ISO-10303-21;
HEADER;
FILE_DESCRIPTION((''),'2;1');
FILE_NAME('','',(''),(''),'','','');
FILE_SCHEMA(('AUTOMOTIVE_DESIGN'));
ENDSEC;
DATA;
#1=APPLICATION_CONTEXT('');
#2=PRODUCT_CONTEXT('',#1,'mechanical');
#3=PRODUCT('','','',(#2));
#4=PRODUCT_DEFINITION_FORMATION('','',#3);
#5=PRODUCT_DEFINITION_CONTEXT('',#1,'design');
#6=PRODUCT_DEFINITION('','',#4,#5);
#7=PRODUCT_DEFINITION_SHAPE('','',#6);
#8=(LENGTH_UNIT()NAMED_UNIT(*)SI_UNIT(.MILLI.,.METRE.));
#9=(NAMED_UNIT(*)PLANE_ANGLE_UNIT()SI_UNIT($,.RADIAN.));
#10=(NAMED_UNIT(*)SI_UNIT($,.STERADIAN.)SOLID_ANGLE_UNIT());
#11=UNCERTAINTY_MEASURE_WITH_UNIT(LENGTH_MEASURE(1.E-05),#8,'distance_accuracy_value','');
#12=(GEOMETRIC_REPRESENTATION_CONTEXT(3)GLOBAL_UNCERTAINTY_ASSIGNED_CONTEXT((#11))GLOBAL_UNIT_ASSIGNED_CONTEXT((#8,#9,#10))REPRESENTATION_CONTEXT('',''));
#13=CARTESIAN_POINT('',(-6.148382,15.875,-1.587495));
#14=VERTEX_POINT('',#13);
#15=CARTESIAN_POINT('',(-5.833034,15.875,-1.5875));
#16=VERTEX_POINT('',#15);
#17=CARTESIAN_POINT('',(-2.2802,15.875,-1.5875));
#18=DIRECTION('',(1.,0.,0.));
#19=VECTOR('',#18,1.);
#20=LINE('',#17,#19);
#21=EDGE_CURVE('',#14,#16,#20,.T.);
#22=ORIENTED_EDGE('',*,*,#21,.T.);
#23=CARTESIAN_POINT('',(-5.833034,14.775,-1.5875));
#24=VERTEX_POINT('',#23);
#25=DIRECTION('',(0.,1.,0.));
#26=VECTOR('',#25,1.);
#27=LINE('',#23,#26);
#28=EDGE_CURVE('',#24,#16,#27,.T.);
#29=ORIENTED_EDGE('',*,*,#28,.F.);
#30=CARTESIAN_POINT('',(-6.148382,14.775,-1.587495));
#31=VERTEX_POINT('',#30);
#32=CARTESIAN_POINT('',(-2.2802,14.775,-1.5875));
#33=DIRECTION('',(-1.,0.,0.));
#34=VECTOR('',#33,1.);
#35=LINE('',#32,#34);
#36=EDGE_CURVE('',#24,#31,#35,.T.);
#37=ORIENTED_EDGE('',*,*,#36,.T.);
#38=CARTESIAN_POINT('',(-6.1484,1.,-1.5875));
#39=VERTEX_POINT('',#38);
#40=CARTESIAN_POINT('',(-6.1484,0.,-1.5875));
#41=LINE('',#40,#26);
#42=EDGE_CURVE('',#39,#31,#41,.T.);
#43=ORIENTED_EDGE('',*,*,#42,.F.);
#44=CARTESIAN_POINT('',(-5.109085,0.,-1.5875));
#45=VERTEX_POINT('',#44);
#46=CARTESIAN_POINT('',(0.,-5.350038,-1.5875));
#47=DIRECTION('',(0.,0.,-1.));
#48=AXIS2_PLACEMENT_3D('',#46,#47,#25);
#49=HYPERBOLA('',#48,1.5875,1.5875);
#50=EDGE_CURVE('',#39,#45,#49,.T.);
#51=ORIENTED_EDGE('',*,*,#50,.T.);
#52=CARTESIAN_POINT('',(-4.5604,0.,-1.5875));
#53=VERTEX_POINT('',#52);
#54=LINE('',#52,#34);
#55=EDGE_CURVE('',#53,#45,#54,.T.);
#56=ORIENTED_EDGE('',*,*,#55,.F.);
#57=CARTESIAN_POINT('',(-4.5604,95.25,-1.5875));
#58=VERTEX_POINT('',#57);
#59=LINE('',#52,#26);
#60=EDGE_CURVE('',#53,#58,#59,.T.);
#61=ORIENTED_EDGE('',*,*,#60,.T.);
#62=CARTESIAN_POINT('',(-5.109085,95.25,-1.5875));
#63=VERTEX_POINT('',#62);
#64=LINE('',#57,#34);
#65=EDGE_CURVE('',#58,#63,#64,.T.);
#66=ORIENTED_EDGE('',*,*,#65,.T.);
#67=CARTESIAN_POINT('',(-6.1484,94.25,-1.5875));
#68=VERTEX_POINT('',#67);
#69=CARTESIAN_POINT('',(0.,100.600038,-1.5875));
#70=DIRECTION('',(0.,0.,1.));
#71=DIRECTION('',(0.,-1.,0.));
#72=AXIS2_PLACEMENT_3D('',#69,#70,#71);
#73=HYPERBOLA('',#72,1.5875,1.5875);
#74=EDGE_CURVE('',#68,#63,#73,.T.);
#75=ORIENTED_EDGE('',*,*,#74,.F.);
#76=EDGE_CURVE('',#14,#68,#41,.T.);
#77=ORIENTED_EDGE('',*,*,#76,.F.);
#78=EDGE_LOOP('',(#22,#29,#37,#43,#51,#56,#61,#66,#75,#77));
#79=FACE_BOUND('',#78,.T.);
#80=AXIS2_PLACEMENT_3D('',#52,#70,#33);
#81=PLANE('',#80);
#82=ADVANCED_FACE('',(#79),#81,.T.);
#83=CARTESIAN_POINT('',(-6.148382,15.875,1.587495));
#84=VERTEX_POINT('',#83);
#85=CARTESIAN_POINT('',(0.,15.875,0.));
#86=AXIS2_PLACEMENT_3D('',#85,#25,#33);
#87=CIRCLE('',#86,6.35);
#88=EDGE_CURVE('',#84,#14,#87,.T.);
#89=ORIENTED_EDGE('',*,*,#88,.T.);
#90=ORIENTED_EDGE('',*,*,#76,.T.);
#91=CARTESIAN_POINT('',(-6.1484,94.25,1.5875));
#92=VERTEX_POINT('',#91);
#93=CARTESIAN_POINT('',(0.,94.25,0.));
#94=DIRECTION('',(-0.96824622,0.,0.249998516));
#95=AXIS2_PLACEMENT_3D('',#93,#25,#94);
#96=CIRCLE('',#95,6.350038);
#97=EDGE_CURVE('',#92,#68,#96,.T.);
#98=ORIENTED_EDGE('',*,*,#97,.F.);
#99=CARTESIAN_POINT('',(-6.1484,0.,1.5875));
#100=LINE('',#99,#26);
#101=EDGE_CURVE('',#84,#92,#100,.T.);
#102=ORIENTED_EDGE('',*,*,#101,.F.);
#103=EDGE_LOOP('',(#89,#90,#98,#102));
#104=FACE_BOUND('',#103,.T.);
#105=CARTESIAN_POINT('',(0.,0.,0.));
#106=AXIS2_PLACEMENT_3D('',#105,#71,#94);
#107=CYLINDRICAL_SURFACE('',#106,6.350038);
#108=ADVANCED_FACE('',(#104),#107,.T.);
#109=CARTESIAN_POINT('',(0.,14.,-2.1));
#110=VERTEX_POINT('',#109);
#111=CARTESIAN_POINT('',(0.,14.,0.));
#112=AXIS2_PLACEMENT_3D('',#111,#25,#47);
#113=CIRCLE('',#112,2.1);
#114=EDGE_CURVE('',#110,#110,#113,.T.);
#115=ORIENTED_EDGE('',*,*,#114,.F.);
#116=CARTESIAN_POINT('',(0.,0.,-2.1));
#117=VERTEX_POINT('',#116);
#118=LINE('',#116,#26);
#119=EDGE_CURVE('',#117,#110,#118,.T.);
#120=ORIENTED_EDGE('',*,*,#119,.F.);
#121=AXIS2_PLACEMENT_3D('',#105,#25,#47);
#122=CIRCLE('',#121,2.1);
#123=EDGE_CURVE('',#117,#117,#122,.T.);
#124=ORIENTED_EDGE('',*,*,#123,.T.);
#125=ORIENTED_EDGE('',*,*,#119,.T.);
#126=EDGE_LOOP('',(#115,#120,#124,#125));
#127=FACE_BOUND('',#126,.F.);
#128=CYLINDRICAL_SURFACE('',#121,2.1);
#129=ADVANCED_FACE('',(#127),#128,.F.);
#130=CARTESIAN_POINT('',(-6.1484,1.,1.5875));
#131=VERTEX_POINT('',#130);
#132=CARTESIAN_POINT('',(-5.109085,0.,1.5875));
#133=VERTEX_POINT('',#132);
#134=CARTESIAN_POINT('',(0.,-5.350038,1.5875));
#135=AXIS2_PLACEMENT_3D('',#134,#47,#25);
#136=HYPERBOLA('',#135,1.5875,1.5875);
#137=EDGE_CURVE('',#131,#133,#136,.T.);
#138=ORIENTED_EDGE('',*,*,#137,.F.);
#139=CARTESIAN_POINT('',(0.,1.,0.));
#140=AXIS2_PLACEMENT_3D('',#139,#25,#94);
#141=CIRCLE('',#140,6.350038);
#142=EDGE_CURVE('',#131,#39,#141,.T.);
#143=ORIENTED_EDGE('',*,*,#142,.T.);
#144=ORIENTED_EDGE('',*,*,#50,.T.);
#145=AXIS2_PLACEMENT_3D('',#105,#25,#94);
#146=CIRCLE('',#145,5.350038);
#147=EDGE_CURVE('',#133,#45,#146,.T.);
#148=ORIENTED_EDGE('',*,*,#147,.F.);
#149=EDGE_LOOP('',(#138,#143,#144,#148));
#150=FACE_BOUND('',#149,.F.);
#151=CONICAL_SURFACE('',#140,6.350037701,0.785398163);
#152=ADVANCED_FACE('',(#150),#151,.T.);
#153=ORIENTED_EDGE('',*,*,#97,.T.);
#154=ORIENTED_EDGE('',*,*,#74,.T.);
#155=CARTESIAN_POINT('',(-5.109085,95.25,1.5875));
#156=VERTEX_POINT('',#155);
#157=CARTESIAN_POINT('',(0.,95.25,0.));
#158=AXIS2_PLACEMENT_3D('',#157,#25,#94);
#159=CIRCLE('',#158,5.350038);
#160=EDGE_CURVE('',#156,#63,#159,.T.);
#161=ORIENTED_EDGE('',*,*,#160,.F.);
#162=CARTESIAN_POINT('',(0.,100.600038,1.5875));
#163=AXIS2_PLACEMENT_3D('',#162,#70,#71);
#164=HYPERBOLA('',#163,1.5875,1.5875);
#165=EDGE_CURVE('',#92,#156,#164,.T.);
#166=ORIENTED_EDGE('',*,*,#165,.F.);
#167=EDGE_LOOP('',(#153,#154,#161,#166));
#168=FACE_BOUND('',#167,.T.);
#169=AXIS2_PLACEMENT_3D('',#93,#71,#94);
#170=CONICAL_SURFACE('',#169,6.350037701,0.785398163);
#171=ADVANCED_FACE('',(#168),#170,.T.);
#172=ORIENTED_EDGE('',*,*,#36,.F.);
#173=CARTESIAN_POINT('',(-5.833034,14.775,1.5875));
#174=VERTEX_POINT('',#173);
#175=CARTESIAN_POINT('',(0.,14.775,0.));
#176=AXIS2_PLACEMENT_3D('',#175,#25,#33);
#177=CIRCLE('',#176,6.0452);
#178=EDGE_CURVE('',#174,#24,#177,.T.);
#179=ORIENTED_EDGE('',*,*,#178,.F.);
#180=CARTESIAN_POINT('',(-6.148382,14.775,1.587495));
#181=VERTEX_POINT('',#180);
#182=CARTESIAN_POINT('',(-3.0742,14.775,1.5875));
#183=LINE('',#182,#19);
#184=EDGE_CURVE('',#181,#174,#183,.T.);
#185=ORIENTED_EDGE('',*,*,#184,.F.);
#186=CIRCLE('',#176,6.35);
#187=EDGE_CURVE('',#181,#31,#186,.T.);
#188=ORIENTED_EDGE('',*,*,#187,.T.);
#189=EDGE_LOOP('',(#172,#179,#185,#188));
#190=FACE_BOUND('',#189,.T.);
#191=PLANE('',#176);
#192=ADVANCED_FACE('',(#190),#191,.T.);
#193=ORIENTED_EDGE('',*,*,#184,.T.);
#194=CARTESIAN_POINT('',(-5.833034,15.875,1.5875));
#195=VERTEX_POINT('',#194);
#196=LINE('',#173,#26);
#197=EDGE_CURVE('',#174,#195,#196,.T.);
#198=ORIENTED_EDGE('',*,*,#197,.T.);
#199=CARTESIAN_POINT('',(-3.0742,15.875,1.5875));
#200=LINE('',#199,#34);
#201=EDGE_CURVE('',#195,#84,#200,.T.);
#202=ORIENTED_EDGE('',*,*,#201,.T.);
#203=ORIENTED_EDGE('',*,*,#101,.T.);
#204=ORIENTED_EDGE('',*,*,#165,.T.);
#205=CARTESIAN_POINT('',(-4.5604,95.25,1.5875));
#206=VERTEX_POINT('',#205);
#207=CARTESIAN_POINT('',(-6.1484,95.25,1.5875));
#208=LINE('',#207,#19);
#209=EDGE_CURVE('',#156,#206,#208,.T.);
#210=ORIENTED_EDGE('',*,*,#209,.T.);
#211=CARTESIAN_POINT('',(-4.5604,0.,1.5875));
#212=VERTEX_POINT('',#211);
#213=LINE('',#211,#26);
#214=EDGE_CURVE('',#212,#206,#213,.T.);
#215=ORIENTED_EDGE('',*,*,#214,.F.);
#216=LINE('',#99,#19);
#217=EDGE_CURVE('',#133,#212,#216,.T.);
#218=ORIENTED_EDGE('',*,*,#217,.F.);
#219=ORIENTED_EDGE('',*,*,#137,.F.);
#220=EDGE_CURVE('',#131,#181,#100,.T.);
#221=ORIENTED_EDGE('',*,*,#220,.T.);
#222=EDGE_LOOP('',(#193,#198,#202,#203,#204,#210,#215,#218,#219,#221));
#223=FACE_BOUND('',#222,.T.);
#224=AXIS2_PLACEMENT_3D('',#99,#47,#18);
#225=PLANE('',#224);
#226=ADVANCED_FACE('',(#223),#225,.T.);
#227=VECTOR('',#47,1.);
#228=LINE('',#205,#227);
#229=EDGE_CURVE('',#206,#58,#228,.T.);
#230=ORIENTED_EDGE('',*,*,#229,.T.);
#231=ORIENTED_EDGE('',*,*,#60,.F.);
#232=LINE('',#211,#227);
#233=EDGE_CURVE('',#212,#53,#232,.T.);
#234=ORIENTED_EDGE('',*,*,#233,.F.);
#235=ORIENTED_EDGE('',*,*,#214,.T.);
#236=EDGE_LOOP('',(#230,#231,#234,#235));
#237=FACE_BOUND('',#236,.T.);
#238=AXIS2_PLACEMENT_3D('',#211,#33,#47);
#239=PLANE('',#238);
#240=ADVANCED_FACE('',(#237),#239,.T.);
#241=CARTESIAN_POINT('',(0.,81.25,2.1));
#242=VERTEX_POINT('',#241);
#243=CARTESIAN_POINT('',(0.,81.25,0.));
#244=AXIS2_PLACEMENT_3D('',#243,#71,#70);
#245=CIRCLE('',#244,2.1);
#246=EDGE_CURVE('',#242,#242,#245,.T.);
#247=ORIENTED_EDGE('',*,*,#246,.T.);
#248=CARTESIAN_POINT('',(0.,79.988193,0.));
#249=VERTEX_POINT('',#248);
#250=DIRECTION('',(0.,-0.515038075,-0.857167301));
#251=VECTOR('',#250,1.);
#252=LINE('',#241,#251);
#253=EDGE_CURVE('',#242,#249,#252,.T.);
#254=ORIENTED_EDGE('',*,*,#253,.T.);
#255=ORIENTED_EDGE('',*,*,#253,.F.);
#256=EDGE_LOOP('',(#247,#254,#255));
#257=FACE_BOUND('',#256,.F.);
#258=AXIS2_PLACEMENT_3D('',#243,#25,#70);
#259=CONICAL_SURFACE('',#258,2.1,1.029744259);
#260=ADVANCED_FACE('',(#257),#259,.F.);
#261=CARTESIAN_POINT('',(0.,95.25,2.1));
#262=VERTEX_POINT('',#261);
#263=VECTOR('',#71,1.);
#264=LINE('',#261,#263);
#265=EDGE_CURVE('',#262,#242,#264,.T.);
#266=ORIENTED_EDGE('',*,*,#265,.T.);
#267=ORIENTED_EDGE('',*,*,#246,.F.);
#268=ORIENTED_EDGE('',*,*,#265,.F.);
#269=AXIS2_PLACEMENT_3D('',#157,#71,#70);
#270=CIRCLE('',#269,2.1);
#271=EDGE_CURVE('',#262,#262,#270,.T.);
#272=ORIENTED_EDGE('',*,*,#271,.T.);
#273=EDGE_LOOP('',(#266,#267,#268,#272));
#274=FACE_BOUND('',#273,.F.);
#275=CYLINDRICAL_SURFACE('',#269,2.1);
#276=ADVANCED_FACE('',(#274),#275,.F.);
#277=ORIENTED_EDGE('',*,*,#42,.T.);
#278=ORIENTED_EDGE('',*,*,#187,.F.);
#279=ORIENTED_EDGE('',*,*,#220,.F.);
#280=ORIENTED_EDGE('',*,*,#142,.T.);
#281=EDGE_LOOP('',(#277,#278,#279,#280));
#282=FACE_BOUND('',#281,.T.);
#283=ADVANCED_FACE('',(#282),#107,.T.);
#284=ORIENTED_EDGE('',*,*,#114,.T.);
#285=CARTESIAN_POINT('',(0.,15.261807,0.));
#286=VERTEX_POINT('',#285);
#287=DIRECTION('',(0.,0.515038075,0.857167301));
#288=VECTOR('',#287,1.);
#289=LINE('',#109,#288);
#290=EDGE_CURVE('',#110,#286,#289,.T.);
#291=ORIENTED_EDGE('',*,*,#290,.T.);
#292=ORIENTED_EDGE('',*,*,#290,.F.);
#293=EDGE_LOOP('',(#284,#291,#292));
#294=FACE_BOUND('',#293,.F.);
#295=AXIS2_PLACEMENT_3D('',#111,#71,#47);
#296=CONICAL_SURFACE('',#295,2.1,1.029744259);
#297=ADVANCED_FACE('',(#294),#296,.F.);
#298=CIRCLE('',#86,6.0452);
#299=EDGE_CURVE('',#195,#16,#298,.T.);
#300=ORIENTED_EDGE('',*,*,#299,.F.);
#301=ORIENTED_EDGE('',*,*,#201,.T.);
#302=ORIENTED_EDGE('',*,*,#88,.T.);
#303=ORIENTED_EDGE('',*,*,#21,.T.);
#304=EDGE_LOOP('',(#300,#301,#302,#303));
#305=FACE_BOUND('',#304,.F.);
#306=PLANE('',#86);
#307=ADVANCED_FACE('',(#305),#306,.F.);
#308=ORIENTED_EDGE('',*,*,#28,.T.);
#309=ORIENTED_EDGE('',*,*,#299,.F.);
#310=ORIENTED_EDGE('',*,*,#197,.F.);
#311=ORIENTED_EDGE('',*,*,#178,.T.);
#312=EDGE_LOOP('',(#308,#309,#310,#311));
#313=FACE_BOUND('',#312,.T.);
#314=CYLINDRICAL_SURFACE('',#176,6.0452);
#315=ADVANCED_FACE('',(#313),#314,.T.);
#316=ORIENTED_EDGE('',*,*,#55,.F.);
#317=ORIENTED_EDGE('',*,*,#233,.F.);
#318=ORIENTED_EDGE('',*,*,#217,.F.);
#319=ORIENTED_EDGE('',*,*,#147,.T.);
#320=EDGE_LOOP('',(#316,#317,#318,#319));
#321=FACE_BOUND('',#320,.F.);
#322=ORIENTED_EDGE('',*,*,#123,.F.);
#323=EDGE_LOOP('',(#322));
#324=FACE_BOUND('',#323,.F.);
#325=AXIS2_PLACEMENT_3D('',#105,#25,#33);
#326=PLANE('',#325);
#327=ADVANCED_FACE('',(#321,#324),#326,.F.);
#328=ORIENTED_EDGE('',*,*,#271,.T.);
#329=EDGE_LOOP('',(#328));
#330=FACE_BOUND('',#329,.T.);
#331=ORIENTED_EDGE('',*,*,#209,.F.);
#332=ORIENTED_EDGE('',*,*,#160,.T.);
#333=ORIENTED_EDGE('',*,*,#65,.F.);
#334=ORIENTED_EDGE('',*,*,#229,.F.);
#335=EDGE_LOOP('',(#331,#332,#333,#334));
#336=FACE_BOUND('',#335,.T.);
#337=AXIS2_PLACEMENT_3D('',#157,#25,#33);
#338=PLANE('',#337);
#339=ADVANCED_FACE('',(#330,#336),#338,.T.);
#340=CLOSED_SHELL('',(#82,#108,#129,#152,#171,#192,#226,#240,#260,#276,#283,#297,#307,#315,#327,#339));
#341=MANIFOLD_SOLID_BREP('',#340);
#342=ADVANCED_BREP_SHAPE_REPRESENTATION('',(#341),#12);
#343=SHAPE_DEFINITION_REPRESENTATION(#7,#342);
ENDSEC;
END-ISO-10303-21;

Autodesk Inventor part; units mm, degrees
ref_plane "YZ Plane" through (0, 0, 0) normal (1, 0, 0) x (0, 1, 0)
ref_plane "XZ Plane" through (0, 0, 0) normal (0, 1, 0) x (-1, 0, 0)
ref_plane "XY Plane" through (0, 0, 0) normal (0, 0, 1) x (1, 0, 0)
sketch "Sketch1" plane through (0, 0, 0) normal (0, 1, 0) x (-1, 0, 0)
  arc A0 (6.1484, 1.5875) -> (6.1484, -1.5875) centre (0, 0) ccw
  line L0 (6.1484, 1.5875) -> (4.5604, 1.5875)
  line L1 (4.5604, 1.5875) -> (4.5604, -1.5875)
  line L2 (4.5604, -1.5875) -> (6.1484, -1.5875)
  line L3 (4.5604, 0) -> (0, 0) construction
  dimension "d0" = 12.7
  dimension "d1" = 3.175
  dimension "d2" = 1.588
extrude "Extrusion1" add sketch "Sketch1" along normal blind 95.25
chamfer "Chamfer1" distance 1 angle 45 2 edges at (6.35, 0, 0) (6.35, 95.25, 0)
hole "Hole1" at (0, 0, 0) direction (0, 1, 0) diameter 4.2 depth 14 tip angle 118
hole "Hole2" at (0, 95.25, 0) direction (0, -1, 0) diameter 4.2 depth 14 tip angle 118
sketch "Sketch2" plane through (0, 0, 0) normal (0, 0, 1) x (1, 0, 0)
  line L0 (0, 0) -> (0, 95.25) construction
  line L1 (-2.1, 95.25) -> (2.1, 95.25) construction
  line L2 (-6.35, 14.775) -> (-6.0452, 14.775)
  line L3 (-6.0452, 14.775) -> (-6.0452, 15.875)
  line L4 (-6.0452, 15.875) -> (-6.35, 15.875)
  line L5 (-6.35, 15.875) -> (-6.35, 14.775)
  dimension "d30" = 1.1
  dimension "d32" = 6.35
  dimension "d33" = 79.375
  dimension "d38" = 6.0452
revolve "Revolution1" cut sketch "Sketch2" angle 360 about axis through (0, 0, 0) along (0, 1, 0)
properties part number "Drum_Axle" material "Steel, High Strength, Low Alloy"
